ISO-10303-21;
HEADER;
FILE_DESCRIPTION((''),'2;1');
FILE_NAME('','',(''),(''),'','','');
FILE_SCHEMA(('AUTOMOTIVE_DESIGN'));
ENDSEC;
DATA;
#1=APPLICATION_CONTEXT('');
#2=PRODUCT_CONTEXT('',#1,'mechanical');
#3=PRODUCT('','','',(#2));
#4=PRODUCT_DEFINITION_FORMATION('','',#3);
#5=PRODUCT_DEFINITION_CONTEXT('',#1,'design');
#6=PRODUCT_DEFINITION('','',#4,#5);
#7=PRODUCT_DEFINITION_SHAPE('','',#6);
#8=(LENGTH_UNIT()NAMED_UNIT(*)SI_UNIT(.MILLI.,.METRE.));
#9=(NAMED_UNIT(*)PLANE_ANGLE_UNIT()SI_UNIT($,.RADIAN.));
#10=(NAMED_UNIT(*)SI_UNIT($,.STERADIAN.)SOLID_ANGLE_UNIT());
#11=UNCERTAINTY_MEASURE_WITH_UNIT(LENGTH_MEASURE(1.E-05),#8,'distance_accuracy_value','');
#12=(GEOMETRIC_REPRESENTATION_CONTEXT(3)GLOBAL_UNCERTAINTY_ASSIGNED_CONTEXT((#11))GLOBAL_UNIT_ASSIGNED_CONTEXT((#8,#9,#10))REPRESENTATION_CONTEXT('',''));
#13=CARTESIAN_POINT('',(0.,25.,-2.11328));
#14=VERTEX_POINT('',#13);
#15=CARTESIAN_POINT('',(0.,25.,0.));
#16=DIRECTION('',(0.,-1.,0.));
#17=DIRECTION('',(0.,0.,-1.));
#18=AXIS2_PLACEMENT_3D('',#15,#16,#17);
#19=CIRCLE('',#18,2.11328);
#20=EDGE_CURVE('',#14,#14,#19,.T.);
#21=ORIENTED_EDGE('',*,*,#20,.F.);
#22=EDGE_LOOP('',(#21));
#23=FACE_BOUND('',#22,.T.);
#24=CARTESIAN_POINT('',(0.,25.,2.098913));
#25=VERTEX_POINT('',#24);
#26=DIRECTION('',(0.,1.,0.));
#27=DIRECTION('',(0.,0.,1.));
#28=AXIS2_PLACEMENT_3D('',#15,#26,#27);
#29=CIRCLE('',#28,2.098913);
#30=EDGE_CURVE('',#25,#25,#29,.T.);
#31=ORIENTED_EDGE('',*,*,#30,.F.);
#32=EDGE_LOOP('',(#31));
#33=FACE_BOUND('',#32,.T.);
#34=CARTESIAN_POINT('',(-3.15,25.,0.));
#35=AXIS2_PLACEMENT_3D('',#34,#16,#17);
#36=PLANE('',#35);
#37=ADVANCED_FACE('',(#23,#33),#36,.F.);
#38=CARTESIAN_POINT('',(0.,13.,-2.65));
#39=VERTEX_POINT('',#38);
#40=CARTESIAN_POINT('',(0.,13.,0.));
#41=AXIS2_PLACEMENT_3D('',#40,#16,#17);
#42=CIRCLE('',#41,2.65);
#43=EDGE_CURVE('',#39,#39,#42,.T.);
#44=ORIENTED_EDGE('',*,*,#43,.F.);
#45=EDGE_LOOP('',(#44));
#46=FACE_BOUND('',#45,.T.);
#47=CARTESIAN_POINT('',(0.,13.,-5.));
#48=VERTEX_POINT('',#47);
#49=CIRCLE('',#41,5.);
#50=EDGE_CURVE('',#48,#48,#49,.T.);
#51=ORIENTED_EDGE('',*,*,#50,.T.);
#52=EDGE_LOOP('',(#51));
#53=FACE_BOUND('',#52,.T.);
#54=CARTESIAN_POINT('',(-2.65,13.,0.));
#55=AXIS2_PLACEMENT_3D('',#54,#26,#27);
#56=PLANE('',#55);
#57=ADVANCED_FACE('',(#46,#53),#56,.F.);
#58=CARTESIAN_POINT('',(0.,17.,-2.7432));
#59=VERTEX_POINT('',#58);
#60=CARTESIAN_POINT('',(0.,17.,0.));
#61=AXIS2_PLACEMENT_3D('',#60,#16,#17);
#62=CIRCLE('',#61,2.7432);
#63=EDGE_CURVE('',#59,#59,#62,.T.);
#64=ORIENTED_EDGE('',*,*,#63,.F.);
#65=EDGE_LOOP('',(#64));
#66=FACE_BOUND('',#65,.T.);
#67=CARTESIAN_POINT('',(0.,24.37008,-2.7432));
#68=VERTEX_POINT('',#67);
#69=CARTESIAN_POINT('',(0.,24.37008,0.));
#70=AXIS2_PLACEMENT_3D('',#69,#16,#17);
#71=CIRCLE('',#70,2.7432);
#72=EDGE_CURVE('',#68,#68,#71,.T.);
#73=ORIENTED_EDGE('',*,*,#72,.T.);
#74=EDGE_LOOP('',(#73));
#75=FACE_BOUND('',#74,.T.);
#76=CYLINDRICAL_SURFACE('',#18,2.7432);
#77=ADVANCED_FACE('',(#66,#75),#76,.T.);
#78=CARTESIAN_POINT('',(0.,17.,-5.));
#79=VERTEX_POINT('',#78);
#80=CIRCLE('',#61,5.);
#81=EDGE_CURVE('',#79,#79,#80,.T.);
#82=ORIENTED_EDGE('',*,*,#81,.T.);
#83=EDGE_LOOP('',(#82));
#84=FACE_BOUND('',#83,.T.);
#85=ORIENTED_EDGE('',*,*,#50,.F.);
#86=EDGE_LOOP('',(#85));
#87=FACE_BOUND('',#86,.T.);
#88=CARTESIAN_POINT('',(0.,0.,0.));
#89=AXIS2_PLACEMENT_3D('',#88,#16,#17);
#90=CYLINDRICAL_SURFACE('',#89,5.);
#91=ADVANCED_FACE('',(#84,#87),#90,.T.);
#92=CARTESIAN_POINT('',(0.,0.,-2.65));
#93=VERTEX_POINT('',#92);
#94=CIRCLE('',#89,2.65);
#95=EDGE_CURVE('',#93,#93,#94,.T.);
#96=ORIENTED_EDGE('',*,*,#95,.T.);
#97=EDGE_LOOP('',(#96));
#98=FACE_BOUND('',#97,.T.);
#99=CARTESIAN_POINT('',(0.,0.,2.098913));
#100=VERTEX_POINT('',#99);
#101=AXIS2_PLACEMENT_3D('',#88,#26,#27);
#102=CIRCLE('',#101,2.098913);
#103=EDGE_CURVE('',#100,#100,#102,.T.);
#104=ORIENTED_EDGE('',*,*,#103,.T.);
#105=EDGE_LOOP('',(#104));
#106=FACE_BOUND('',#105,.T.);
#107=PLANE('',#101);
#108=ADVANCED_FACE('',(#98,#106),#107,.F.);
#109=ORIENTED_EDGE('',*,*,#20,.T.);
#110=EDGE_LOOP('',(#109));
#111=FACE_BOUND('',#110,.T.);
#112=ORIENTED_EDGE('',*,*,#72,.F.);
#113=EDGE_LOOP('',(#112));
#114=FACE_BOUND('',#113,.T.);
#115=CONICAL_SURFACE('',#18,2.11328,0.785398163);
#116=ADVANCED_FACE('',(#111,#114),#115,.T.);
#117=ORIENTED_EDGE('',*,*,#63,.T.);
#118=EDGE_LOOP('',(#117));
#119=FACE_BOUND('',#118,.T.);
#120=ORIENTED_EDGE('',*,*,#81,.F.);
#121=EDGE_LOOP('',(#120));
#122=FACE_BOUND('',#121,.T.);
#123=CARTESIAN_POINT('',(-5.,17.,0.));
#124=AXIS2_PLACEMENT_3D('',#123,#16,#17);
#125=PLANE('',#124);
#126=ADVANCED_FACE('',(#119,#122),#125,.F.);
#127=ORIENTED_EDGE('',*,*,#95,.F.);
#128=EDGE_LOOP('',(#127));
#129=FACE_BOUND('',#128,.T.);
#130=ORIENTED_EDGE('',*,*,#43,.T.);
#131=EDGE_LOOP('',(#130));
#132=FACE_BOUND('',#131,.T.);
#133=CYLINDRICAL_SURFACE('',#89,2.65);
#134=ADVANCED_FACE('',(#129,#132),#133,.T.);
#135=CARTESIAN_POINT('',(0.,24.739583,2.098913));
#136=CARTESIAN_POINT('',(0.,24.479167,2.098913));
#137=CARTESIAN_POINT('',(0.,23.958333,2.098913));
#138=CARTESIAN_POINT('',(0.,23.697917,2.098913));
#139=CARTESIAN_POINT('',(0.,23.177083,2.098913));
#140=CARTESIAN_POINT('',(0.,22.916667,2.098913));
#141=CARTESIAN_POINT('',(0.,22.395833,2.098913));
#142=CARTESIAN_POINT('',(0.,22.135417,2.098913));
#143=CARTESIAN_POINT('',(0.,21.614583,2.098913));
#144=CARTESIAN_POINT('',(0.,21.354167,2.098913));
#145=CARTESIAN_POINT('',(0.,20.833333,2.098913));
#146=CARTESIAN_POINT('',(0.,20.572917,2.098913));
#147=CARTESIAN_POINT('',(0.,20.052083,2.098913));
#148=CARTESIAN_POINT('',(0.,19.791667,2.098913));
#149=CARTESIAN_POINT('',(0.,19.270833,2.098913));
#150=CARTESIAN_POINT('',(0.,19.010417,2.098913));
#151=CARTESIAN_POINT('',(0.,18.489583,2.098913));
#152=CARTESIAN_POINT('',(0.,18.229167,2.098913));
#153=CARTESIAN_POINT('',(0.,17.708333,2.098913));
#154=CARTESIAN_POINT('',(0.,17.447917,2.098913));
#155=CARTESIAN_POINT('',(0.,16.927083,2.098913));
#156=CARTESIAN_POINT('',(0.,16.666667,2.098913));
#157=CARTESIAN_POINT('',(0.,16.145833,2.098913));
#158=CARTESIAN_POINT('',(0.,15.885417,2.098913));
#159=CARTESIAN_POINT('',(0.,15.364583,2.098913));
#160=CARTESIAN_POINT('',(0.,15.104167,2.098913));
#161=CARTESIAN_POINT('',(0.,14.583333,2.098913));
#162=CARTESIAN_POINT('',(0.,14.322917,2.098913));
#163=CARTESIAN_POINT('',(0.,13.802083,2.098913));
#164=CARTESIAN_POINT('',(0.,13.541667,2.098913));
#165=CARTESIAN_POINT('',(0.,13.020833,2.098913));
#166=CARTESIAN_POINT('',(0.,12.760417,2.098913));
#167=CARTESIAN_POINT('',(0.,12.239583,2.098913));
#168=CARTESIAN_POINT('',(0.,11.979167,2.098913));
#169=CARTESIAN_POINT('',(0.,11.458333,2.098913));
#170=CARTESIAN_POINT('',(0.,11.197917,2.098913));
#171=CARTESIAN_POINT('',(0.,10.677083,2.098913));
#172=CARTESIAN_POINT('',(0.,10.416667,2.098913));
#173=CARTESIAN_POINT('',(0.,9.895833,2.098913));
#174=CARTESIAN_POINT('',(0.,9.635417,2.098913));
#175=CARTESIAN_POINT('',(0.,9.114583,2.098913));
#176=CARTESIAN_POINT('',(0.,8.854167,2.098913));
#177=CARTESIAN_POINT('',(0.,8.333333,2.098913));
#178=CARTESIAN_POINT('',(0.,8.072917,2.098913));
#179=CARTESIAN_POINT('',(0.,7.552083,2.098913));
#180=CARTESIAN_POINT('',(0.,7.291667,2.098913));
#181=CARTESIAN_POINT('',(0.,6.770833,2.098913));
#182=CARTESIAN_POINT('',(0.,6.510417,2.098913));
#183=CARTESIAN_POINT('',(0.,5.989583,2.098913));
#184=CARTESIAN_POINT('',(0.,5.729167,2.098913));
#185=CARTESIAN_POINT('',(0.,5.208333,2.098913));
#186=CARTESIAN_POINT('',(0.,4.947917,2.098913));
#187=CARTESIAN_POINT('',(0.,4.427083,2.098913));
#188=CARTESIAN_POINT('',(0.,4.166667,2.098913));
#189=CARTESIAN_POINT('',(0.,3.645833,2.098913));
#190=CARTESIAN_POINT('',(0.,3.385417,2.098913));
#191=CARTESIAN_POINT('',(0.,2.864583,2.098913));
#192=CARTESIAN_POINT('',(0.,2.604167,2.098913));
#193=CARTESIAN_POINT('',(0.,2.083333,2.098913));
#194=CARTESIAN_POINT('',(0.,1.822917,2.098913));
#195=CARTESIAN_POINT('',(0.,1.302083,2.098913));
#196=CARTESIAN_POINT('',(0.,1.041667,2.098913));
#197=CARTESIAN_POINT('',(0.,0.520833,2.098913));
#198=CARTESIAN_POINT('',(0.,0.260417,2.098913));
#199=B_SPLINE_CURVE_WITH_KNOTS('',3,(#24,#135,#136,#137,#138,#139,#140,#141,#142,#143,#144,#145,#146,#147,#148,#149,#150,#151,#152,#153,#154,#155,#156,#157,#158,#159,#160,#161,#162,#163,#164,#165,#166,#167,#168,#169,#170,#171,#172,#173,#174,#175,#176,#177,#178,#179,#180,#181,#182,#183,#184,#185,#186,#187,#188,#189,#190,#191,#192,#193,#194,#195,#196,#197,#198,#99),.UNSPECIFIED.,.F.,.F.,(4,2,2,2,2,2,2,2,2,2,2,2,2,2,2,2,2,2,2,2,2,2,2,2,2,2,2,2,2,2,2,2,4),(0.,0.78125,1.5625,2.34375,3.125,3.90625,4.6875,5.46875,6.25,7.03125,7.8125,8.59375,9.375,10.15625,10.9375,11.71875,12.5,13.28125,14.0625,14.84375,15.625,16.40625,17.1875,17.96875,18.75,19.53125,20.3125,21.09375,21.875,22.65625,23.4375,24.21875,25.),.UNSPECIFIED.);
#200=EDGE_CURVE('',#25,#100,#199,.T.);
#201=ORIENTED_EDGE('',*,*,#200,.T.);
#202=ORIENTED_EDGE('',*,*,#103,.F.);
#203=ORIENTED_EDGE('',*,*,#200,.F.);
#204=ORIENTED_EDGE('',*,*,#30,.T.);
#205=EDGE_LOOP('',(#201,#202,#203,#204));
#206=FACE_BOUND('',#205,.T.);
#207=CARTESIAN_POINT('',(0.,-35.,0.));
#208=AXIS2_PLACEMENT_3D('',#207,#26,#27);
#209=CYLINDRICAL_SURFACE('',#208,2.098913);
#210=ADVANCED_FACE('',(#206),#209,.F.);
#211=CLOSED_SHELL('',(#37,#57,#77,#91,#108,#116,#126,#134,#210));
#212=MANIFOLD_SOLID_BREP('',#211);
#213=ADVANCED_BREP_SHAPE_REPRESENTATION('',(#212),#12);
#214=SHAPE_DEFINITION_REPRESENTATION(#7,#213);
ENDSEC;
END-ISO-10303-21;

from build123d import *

# Parameters (mm, degrees)
SKETCH3_R          = 2.098913331
CUT_EXTRUDE1_DEPTH = 60


# Read off the part's stored shape, not the designer's step: #12-24 Machine Threads Stud1
with BuildPart() as part:
    # Sketch2 → Revolve1 (revolve)
    with BuildSketch(Plane.XY, mode=Mode.PRIVATE) as revolve1_sk:
        Polygon((0, 0), (0, 25), (-3.15, 25), (-3.15, 17), (-5, 17), (-5, 13), (-2.65, 13), (-2.65, 0), align=None)
    revolve(revolve1_sk.sketch.rotate(Axis((0, 0, 0), (0, 1, 0)), 270), axis=Axis((0, 0, 0), (0, 1, 0)))

    # Sketch3 → Cut-Extrude1 (cut)
    with BuildSketch(Plane(origin=(0, 25, 0), x_dir=(1, 0, 0), z_dir=(0, 1, 0))):
        with Locations(Location((0, 0, 0), (0, 0, 270))):
            Circle(SKETCH3_R)
    extrude(amount=-CUT_EXTRUDE1_DEPTH, mode=Mode.SUBTRACT)

    # #12-24 Machine Threads Stud1 outline → #12-24 Machine Threads Stud1 (revolve, cut)
    with BuildSketch(Plane.XY):
        Polygon((2.7432, 24.37008), (2.7432, 17), (3.15, 17), (3.15, 25), (2.11328, 25), align=None)
    revolve(axis=Axis((0, 0, 0), (0, 1, 0)), mode=Mode.SUBTRACT)


solid = part.part
